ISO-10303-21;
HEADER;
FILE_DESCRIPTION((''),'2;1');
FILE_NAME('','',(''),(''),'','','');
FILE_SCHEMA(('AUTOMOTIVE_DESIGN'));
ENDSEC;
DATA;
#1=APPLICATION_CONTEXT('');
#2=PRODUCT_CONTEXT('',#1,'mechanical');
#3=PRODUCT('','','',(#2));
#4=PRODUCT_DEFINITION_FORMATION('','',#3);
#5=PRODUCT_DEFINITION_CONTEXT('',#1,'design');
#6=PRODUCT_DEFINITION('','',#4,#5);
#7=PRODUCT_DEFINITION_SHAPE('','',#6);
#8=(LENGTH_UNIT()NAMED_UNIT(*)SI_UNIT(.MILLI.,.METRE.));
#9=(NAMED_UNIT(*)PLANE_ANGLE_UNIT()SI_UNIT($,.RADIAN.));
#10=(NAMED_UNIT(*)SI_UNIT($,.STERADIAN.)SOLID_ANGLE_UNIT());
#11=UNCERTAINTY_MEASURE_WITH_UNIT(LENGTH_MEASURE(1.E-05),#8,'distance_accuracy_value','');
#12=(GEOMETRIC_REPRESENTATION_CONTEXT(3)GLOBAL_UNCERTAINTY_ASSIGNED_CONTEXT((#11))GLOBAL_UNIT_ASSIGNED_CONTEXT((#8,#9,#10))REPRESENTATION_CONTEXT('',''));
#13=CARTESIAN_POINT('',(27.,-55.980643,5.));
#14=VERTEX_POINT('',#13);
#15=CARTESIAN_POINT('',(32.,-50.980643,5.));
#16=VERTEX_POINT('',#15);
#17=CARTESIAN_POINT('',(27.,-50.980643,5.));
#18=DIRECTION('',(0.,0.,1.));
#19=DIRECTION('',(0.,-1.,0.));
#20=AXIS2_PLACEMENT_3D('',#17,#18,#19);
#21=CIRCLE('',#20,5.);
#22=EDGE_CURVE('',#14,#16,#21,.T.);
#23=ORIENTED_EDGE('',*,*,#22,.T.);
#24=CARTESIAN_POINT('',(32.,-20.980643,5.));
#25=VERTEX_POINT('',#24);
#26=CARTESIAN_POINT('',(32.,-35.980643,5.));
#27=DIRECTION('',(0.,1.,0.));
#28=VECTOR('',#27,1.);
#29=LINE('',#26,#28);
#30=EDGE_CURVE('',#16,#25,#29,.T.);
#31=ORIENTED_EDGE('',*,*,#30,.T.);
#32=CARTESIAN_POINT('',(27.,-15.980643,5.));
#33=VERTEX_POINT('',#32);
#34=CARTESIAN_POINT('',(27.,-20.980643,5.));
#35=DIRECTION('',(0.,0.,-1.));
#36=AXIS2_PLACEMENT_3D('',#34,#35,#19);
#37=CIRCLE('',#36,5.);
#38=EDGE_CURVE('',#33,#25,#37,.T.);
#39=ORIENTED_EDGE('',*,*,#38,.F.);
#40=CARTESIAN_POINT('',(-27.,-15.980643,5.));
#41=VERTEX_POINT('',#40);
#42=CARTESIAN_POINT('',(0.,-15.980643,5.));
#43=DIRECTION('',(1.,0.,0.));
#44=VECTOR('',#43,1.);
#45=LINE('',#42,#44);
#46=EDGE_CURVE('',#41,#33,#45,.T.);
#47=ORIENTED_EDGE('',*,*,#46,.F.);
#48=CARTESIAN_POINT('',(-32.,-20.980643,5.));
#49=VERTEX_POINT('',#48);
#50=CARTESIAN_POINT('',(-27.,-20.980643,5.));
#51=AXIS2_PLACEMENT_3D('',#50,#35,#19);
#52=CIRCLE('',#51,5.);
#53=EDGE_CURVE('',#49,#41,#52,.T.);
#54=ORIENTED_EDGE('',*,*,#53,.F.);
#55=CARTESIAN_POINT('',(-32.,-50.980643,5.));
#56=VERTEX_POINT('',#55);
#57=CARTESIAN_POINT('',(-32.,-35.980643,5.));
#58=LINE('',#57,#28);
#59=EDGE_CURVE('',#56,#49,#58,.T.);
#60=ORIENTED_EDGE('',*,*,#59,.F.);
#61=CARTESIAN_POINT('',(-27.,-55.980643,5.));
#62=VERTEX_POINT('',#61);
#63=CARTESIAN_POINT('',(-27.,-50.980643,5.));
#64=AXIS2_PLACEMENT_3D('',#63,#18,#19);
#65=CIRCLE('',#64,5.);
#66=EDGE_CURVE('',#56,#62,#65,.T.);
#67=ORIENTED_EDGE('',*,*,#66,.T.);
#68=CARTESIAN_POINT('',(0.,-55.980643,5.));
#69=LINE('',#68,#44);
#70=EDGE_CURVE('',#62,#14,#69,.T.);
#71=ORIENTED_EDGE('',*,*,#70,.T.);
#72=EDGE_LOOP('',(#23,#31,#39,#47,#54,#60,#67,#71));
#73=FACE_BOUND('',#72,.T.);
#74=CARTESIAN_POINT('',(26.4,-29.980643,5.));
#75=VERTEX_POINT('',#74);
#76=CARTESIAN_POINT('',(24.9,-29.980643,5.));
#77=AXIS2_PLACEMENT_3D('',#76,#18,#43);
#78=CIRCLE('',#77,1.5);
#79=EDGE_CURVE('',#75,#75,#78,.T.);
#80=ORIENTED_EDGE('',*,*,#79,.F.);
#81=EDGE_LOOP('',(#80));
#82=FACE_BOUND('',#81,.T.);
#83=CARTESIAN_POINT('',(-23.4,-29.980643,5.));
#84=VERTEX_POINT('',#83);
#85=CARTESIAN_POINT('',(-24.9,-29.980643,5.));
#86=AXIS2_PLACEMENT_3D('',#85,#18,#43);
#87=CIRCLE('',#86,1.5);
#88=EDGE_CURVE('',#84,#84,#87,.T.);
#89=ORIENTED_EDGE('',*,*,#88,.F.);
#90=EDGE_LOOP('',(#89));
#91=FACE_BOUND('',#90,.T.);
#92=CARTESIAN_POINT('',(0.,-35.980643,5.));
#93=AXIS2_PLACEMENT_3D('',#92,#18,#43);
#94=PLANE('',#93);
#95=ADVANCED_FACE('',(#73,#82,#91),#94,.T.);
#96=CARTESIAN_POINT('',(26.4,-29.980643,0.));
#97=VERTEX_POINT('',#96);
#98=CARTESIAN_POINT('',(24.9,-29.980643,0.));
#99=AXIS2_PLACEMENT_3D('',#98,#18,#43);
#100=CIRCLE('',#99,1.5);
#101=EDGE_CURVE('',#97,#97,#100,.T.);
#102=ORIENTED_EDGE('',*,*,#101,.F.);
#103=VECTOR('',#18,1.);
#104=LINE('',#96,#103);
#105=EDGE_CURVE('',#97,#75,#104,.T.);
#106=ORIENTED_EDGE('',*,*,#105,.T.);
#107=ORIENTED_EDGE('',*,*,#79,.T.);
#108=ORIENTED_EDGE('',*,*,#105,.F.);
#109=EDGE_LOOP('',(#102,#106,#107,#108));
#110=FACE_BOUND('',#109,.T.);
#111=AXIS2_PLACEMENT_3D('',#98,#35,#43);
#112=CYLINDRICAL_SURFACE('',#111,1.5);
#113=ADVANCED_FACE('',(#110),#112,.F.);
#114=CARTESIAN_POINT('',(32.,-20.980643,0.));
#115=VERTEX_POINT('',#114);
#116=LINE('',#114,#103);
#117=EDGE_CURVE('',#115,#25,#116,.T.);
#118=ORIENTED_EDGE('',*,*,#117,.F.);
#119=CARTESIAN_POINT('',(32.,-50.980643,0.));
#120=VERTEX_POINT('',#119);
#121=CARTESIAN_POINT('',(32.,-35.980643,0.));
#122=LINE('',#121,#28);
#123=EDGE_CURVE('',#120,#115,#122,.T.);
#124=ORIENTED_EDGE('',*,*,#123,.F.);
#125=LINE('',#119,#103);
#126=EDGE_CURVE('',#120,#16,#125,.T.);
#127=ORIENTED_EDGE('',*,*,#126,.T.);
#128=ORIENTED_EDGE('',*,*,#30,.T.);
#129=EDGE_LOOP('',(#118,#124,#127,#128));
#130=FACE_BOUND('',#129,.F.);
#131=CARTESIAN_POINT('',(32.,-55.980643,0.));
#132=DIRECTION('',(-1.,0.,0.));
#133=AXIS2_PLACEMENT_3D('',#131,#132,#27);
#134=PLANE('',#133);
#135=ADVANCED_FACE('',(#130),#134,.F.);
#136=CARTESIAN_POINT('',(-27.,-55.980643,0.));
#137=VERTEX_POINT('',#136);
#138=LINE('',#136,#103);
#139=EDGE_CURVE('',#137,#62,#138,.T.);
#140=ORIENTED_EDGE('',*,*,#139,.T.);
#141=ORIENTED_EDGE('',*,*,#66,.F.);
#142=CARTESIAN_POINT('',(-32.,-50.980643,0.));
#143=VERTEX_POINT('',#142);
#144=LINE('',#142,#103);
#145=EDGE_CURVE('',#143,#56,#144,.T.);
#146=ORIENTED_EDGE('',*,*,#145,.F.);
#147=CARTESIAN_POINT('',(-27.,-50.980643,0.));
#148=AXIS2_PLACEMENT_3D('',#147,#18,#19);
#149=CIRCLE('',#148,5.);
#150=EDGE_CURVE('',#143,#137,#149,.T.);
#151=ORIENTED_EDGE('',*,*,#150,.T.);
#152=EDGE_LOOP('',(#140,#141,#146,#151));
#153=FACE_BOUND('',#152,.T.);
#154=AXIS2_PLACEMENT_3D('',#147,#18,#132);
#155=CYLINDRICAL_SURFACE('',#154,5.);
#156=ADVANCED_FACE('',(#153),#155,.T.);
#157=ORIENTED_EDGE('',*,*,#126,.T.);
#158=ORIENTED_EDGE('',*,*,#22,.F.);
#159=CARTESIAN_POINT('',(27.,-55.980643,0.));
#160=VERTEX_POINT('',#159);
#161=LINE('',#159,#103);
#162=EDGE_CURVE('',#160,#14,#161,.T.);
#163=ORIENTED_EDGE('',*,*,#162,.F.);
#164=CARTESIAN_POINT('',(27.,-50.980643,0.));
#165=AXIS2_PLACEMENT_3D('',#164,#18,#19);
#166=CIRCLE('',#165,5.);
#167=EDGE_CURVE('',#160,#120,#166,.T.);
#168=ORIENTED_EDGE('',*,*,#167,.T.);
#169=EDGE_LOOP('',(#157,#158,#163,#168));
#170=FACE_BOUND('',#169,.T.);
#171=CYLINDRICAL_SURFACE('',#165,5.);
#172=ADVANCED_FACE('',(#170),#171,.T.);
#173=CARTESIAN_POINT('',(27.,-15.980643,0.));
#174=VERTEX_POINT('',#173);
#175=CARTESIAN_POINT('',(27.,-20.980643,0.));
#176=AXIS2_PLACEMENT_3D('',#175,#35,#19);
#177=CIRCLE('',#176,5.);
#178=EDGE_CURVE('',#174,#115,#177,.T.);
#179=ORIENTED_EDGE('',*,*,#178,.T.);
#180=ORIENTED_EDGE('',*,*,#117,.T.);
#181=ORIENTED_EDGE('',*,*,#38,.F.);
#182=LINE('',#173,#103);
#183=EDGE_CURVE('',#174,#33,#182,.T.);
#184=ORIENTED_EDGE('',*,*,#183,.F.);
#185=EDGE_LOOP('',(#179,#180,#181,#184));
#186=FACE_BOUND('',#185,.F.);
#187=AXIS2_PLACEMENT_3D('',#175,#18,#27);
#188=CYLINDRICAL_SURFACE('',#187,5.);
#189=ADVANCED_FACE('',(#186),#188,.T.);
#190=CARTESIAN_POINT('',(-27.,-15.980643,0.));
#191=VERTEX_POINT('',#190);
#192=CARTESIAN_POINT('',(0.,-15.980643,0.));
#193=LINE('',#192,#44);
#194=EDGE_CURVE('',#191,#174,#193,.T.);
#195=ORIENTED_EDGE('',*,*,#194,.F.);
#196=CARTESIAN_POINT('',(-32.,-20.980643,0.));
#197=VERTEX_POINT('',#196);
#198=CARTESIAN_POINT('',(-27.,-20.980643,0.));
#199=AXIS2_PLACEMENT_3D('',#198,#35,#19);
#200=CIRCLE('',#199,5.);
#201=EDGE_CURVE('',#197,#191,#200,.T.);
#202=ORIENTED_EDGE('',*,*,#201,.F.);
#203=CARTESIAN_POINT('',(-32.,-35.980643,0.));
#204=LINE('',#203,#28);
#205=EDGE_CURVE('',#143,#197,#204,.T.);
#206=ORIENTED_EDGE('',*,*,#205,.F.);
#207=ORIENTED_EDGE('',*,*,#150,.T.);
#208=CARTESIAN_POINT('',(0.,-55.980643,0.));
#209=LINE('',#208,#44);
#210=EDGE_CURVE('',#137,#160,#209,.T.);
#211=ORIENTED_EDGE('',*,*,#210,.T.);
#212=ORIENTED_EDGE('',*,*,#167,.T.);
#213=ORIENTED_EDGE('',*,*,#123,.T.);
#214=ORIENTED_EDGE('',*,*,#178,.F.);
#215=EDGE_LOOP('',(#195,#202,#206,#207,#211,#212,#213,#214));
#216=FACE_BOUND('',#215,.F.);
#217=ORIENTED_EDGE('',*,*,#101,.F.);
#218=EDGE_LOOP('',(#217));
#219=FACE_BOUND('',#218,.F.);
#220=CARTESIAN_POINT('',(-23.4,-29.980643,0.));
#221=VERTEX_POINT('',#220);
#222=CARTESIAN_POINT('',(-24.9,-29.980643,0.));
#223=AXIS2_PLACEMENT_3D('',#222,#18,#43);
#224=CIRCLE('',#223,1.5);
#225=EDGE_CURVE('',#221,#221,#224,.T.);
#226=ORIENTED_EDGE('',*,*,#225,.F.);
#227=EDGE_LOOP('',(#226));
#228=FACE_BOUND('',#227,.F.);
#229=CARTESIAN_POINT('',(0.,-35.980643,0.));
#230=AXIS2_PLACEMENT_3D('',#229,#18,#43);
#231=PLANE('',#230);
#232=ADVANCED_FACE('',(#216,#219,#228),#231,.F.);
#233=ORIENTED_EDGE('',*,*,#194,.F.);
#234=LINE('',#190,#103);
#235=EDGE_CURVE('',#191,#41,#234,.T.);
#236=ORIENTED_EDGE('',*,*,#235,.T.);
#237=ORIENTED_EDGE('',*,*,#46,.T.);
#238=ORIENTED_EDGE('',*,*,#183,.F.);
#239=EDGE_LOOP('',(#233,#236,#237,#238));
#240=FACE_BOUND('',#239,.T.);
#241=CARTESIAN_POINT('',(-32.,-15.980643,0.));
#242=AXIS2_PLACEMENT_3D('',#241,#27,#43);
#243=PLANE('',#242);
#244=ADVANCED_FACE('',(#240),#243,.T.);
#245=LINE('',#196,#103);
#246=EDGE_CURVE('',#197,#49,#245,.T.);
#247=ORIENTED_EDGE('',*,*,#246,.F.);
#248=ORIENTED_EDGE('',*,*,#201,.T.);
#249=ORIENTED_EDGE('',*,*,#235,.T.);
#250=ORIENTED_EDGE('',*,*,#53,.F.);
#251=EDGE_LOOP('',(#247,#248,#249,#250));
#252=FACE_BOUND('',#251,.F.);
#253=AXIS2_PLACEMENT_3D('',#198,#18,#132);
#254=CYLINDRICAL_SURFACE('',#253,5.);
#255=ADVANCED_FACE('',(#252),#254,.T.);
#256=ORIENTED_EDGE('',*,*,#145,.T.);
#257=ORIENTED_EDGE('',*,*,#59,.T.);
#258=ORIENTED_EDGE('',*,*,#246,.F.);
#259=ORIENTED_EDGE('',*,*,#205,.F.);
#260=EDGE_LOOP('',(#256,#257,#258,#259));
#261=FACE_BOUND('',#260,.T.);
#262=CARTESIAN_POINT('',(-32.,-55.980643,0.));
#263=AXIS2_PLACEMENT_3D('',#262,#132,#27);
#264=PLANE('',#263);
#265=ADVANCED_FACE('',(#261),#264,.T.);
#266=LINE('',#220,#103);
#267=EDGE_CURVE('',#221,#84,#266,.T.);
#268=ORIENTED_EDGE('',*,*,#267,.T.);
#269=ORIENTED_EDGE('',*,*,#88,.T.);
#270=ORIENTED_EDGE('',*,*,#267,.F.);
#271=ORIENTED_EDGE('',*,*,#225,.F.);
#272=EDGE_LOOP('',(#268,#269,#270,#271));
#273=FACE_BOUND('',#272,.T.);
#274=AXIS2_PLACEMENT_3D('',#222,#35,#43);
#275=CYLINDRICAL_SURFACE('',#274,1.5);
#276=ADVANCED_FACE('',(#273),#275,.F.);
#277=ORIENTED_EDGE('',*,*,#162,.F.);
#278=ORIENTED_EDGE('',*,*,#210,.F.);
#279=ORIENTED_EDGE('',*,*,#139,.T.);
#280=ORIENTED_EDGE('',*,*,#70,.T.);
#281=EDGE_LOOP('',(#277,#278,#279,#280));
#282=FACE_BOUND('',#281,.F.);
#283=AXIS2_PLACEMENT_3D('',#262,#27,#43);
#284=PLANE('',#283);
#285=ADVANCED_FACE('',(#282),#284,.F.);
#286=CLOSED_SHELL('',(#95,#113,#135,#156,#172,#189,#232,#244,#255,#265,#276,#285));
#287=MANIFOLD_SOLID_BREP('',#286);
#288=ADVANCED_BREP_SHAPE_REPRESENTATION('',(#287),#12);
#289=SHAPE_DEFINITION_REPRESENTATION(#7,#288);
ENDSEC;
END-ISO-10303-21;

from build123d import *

# Parameters (mm, degrees)
F0_W     = 64
F0_H     = 40
F0_R     = 1.5
F1_DEPTH = 5
F2_R     = 5


# Not quite as in the source:
# - a feature names something its author has since deleted; it is built from what else it names


with BuildPart() as f1:
    # F0 (on Top) → F1 (new body)
    with BuildSketch(Plane.XY):
        with Locations((0, -35.9806431703)):
            Rectangle(F0_W, F0_H)
        with Locations((-24.9, -29.9806431703)):
            Circle(F0_R, mode=Mode.SUBTRACT)
        with Locations((24.9, -29.9806431703)):
            Circle(F0_R, mode=Mode.SUBTRACT)
    extrude(amount=F1_DEPTH)

    # F2
    f2_edges = [f1.edges().sort_by_distance(p)[0] for p in [
        (-32, -55.980643, 2.5),
        (32, -55.980643, 2.5),
        (32, -15.980643, 2.5),
        (-32, -15.980643, 2.5),
    ]]
    fillet(f2_edges, radius=F2_R)


solid = f1.part
